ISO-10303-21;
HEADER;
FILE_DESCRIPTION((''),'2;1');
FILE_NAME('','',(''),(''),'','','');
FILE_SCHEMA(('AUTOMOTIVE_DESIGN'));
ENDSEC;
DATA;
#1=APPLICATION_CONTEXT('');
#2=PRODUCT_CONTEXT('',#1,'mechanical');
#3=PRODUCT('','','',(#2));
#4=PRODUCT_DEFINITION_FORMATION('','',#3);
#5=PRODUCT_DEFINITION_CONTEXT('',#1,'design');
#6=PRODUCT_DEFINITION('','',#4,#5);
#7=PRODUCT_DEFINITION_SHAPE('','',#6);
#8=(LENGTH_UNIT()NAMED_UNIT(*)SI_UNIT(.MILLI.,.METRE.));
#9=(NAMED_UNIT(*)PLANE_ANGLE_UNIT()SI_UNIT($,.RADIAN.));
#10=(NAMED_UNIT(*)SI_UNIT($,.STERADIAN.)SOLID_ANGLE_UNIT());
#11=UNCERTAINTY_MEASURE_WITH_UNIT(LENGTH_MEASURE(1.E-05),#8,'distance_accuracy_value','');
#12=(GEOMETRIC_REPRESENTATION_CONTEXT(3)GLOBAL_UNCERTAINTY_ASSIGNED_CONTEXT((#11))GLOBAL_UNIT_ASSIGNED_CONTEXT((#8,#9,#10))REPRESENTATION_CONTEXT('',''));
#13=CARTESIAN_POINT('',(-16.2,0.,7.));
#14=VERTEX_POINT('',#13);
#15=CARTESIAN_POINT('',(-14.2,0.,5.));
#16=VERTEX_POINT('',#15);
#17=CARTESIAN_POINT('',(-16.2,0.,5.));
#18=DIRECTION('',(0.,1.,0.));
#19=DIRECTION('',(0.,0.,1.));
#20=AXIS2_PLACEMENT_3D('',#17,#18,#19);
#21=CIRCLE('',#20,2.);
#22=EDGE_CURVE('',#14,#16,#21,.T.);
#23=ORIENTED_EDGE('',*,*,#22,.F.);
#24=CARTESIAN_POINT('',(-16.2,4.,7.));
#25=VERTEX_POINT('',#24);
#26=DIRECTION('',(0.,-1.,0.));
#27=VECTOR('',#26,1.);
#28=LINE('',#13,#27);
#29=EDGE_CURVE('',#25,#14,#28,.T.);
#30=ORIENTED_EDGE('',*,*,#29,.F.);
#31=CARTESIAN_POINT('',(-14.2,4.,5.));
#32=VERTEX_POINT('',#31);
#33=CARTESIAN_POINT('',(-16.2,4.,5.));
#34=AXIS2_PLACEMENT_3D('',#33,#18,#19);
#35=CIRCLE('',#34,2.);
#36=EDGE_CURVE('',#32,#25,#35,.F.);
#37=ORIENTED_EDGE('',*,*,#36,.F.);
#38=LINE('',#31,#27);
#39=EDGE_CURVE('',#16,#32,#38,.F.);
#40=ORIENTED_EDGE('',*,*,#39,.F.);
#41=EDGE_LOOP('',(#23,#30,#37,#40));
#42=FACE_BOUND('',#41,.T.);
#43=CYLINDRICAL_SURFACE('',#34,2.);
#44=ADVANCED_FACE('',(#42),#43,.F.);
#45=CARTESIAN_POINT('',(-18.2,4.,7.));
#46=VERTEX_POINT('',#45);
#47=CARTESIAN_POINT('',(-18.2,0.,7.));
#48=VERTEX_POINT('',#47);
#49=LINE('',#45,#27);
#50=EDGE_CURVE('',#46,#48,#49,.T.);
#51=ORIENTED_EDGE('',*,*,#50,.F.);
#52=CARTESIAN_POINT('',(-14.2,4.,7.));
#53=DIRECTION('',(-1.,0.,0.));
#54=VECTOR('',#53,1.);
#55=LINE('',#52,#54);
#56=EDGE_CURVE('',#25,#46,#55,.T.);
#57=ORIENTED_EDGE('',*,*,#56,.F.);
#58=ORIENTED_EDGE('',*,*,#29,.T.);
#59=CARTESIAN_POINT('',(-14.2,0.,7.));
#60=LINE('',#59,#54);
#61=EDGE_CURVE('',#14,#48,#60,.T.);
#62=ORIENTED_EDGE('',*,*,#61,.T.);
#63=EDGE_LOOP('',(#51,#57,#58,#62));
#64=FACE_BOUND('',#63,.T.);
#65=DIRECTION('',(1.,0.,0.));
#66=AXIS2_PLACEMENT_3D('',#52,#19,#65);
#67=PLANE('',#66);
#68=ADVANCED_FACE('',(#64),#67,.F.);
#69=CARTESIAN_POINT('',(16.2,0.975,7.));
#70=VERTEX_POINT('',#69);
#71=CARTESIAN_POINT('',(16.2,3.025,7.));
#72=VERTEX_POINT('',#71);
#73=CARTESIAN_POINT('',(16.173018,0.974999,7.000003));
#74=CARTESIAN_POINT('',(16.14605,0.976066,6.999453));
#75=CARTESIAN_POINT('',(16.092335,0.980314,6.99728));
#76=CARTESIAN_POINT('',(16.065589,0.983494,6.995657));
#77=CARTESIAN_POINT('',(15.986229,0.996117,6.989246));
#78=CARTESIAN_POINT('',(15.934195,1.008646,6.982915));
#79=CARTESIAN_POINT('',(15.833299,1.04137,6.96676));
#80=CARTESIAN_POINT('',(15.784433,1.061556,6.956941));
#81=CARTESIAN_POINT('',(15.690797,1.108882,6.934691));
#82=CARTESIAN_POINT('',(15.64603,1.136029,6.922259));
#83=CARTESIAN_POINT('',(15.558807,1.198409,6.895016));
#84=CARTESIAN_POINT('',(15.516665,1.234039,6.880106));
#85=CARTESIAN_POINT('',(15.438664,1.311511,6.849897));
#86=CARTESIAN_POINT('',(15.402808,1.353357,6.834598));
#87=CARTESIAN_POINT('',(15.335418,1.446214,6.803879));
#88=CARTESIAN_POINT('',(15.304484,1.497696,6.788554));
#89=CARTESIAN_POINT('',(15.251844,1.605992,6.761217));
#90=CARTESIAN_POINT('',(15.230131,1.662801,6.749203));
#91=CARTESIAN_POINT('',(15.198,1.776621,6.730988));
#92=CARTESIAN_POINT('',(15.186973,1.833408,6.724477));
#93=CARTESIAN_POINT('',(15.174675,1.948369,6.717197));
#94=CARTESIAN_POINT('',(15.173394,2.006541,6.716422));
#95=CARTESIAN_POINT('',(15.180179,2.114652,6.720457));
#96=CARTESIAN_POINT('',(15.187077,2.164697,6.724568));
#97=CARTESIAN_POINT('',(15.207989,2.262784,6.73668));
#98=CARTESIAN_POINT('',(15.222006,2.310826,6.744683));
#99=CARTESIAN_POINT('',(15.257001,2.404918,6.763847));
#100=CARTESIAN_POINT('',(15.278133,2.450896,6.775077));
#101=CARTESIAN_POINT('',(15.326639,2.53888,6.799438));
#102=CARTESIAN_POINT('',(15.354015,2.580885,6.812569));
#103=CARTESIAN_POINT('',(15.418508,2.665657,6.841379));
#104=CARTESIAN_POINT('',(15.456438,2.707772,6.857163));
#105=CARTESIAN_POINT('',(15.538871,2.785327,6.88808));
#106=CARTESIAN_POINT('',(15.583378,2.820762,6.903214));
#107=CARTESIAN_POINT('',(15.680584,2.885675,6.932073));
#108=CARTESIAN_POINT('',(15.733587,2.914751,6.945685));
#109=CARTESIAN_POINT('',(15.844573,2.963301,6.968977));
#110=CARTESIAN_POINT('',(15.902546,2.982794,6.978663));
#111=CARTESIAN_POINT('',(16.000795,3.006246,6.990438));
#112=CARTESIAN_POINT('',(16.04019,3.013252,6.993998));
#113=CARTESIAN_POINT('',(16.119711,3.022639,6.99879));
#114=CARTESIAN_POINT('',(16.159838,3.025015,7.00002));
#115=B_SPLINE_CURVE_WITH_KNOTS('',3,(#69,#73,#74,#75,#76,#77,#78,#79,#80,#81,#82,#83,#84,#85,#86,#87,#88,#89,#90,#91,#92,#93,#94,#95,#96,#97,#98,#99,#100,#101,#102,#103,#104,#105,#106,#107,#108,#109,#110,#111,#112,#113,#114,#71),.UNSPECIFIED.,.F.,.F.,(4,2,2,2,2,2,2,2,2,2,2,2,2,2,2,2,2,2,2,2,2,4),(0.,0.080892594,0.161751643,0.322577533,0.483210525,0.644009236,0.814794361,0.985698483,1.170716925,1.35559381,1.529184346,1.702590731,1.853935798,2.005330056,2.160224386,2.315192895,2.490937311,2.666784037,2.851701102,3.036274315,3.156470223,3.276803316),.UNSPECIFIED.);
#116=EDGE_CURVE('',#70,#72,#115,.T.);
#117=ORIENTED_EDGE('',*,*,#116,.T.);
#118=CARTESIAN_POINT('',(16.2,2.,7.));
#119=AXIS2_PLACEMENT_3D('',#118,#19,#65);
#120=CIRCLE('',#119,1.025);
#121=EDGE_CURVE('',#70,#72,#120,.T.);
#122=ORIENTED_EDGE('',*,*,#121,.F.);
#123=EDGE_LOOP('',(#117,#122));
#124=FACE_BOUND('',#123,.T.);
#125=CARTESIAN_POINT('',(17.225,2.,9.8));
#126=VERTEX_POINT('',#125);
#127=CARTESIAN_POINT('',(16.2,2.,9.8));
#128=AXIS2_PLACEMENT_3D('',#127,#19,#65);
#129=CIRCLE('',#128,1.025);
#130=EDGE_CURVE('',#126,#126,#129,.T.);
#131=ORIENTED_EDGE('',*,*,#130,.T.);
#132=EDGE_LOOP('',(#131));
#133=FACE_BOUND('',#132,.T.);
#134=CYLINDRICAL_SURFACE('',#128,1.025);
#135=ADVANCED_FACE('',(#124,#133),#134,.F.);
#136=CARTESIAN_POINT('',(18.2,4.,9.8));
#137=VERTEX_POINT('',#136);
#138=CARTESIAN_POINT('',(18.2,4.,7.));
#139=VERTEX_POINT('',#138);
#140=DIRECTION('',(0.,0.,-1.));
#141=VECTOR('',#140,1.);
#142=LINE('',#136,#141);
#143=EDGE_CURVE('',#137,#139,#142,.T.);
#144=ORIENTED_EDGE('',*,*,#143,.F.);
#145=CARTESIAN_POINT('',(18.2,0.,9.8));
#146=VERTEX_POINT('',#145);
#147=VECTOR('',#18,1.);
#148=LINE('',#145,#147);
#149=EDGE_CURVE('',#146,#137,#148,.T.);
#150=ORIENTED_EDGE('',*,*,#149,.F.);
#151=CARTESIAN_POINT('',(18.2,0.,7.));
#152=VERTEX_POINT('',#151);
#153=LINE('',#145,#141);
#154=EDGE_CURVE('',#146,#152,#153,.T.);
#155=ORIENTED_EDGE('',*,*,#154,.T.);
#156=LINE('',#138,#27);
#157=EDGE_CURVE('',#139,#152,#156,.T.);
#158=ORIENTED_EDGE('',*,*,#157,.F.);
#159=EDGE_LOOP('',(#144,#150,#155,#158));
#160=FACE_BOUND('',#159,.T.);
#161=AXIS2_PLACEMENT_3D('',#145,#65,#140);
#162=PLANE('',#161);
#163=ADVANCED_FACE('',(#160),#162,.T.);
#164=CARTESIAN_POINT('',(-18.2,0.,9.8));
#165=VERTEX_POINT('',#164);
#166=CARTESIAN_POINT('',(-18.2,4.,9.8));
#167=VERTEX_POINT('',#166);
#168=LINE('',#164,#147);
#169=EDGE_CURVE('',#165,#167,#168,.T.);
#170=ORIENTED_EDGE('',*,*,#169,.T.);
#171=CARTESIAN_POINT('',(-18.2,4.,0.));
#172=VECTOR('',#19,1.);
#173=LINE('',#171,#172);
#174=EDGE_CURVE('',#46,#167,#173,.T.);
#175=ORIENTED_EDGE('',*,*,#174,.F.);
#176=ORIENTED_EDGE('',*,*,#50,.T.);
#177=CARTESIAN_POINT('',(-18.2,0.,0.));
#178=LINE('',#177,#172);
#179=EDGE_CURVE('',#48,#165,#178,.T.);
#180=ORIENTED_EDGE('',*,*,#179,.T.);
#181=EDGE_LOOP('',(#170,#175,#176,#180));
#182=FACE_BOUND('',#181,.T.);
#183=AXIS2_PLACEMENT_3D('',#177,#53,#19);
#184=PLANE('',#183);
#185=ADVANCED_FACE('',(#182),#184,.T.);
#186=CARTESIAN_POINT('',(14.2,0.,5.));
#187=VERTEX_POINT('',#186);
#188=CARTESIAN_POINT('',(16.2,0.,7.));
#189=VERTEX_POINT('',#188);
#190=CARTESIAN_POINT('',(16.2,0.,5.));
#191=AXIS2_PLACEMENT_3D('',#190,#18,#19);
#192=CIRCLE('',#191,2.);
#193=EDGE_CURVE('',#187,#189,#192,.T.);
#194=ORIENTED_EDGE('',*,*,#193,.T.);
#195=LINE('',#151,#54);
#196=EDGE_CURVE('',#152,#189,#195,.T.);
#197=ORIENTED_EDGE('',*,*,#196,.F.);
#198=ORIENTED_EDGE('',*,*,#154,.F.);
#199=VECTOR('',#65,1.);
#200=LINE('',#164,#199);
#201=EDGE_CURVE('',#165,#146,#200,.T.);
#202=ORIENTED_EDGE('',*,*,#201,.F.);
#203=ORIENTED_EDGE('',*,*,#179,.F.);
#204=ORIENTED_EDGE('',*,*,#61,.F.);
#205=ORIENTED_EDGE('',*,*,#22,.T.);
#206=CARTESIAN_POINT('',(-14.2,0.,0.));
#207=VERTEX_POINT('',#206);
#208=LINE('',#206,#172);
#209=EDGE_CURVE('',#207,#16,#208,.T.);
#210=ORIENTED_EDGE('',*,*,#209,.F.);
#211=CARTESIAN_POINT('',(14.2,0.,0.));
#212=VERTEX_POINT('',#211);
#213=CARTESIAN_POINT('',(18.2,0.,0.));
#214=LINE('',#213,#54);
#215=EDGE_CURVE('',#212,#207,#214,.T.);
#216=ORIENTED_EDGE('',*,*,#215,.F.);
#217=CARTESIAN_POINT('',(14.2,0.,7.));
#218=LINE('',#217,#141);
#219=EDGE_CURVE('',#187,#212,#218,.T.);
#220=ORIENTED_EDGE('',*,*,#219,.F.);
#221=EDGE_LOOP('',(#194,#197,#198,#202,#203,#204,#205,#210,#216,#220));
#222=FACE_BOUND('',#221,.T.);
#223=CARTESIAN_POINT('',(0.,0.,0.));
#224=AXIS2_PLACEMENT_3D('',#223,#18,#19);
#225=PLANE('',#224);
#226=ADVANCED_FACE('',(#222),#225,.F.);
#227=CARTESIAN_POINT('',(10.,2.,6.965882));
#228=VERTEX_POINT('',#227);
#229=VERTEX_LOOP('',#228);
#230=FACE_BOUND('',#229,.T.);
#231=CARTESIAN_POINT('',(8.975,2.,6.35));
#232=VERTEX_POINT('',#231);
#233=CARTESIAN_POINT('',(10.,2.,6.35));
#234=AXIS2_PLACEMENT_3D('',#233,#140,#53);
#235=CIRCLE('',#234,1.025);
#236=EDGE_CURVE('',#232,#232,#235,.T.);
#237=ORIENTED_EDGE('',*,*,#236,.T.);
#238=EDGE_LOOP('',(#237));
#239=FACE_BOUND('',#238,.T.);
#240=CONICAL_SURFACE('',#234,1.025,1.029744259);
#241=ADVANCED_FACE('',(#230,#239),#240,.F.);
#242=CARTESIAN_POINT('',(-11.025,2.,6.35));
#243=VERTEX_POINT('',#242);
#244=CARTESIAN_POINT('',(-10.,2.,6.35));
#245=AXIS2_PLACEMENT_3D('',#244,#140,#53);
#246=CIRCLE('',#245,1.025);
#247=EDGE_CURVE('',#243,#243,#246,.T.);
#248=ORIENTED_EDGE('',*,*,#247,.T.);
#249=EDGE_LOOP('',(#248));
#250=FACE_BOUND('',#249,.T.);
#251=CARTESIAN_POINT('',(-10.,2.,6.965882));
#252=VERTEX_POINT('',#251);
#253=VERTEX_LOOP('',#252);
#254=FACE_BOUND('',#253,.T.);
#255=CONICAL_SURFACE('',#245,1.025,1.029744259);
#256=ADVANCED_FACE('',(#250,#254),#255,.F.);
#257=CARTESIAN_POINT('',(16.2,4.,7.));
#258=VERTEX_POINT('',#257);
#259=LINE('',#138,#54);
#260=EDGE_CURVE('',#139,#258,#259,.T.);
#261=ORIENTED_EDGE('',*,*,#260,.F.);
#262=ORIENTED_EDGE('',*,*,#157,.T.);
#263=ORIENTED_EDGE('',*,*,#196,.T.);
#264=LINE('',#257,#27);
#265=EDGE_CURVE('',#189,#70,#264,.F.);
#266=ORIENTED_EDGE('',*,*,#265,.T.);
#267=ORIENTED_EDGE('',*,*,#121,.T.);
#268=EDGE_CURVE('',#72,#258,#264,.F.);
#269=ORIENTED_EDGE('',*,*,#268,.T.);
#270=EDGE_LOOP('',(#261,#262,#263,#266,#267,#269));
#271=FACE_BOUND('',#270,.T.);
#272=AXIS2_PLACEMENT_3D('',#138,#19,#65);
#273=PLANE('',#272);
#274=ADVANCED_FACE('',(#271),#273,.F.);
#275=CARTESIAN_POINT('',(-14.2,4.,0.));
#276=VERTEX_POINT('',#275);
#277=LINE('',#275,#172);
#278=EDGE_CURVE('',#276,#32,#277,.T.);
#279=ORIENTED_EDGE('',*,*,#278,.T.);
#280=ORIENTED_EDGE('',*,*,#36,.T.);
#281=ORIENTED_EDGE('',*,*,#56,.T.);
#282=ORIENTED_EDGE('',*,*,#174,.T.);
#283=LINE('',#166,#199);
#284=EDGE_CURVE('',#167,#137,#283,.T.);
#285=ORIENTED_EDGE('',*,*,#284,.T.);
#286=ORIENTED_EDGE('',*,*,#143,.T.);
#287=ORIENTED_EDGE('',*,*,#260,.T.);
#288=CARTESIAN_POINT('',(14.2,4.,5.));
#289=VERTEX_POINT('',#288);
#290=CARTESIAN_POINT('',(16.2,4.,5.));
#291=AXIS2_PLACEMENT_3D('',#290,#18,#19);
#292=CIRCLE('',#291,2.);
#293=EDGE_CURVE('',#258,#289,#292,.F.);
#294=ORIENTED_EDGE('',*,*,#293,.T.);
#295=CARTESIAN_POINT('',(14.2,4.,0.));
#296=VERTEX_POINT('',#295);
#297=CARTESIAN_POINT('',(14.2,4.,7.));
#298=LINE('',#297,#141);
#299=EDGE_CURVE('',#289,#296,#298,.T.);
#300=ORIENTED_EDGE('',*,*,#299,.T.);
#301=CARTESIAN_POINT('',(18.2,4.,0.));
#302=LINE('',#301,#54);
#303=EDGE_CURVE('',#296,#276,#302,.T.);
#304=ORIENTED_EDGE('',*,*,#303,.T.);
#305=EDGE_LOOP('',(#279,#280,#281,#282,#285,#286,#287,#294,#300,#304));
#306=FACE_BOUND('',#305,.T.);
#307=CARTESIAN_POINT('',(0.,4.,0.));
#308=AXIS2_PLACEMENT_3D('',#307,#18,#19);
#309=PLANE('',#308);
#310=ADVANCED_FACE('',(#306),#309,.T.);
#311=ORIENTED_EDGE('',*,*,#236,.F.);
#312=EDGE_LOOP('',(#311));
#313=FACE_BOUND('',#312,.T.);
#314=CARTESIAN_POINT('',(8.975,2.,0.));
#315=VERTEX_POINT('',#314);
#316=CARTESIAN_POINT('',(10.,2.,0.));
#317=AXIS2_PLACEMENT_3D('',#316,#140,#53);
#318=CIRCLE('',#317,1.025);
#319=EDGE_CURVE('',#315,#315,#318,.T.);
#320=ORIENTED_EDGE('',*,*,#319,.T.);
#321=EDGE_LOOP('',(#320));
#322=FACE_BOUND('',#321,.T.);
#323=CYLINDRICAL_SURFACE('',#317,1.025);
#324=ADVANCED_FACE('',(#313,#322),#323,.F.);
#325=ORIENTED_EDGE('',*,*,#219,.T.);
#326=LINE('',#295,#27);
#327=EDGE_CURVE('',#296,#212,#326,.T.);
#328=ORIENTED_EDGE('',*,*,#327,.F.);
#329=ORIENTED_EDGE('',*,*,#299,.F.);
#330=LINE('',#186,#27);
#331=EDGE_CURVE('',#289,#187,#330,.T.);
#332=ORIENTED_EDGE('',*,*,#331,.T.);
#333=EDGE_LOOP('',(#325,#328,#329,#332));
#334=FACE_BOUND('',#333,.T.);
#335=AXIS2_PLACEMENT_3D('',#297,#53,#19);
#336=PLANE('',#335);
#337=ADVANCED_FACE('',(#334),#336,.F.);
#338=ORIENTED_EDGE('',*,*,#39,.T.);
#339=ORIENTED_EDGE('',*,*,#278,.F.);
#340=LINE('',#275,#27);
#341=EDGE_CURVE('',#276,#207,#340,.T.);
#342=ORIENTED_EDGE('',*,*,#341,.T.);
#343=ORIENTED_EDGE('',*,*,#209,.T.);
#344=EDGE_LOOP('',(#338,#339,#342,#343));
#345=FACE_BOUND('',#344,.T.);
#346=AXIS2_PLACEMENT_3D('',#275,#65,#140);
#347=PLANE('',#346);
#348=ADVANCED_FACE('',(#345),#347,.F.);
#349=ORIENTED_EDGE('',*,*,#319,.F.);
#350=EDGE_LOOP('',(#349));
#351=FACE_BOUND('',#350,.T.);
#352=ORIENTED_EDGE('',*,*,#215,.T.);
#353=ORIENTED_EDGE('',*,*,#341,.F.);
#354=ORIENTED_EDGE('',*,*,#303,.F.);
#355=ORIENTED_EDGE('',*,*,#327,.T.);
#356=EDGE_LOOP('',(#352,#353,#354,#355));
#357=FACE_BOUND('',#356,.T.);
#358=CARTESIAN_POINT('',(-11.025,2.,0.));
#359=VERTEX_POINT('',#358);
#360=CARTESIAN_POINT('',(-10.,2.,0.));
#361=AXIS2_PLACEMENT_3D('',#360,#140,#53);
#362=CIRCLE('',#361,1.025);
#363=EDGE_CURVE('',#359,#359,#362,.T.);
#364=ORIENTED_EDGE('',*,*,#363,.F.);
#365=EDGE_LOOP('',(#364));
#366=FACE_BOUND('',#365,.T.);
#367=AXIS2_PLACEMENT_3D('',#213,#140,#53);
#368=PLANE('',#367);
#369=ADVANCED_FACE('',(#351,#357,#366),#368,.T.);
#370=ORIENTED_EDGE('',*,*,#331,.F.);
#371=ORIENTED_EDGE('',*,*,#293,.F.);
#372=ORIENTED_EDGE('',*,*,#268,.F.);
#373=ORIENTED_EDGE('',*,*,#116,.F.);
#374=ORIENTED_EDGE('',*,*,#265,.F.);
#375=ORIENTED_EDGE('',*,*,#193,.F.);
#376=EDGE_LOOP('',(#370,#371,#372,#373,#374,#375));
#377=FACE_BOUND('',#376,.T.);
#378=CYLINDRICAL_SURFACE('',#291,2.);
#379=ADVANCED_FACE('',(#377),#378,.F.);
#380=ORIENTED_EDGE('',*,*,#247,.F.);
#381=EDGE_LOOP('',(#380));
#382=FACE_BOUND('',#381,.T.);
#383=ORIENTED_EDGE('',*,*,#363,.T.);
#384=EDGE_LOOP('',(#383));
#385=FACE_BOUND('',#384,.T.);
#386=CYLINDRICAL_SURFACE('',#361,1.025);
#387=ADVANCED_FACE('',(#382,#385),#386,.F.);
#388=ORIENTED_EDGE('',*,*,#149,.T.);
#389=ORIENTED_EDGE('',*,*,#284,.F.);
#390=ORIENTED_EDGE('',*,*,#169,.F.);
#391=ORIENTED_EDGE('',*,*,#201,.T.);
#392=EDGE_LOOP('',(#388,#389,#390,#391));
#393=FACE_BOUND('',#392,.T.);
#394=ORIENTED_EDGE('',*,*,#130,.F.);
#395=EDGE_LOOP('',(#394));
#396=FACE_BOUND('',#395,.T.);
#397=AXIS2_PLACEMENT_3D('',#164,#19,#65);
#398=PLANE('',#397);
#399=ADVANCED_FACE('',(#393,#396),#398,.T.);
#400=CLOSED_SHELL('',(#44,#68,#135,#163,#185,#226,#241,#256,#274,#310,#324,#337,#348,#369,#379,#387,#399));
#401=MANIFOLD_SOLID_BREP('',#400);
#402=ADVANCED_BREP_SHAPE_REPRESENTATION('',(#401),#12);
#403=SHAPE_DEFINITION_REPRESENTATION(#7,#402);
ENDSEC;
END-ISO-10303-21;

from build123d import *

# Parameters (mm, degrees)
SKETCH1_W                    = 36.4
SKETCH1_H                    = 9.8
BOSS_EXTRUDE1_DEPTH          = 4
SKETCH2_W                    = 4
SKETCH2_H                    = 6.999999999
CUT_EXTRUDE1_DEPTH           = 22.05421573
SKETCH3_W                    = 4
SKETCH3_H                    = 6.999999999
CUT_EXTRUDE2_DEPTH           = 22.05421573
M2_5X0_45_TAPPED_HOLE1_D     = 2.05
M2_5X0_45_TAPPED_HOLE1_DEPTH = 6.35
M2_5X0_45_TAPPED_HOLE1_TIP   = 0.615882135
M2_5X0_45_TAPPED_HOLE2_D     = 2.05
FILLET1_R                    = 2


with BuildPart() as part:
    # Sketch1 → Boss-Extrude1 (new body)
    with BuildSketch(Plane(origin=(0, 4, 0), x_dir=(1, 0, 0), z_dir=(0, 1, 0))):
        with Locations((0, -4.9)):
            Rectangle(SKETCH1_W, SKETCH1_H)
    extrude(amount=-BOSS_EXTRUDE1_DEPTH)

    # Sketch2 → Cut-Extrude1 (cut, through all)
    with BuildSketch(Plane.XZ):
        with Locations((-16.2, 3.5)):
            Rectangle(SKETCH2_W, SKETCH2_H)
    extrude(amount=-CUT_EXTRUDE1_DEPTH, mode=Mode.SUBTRACT)

    # Sketch3 → Cut-Extrude2 (cut, through all)
    with BuildSketch(Plane.XZ):
        with Locations((16.2, 3.5)):
            Rectangle(SKETCH3_W, SKETCH3_H)
    extrude(amount=-CUT_EXTRUDE2_DEPTH, mode=Mode.SUBTRACT)

    # M2.5x0.45 Tapped Hole1
    with Locations(Plane(origin=(0, 0, 0), x_dir=(-1, 0, 0), z_dir=(0, 0, -1))):
        with Locations((10, 2), (-10, 2)):
            Hole(M2_5X0_45_TAPPED_HOLE1_D / 2, depth=M2_5X0_45_TAPPED_HOLE1_DEPTH)
            with Locations((0, 0, -(M2_5X0_45_TAPPED_HOLE1_DEPTH + M2_5X0_45_TAPPED_HOLE1_TIP / 2))):  # 118° drill point
                Cone(0, M2_5X0_45_TAPPED_HOLE1_D / 2, M2_5X0_45_TAPPED_HOLE1_TIP, mode=Mode.SUBTRACT)

    # M2.5x0.45 Tapped Hole2 (through all)
    with Locations(Plane.XY.offset(9.8)):
        with Locations((16.2, 2)):
            Hole(M2_5X0_45_TAPPED_HOLE2_D / 2)

    # Fillet1
    # the kernel refuses this fillet: 2 mm, written as the material it adds along each edge
    with BuildSketch(Plane(origin=(-14.2, 0, 6.999999999), x_dir=(0, 0, -1), z_dir=(0, 1, 0))) as fillet1_piece_1:
        with BuildLine():
            CenterArc((FILLET1_R, FILLET1_R), FILLET1_R, 180, 90)
            Line((0, FILLET1_R), (0, 0))
            Line((0, 0), (FILLET1_R, 0))
        make_face()
    extrude(amount=4)
    with BuildSketch(Plane(origin=(14.2, 0, 6.999999999), x_dir=(0, 0, -1), z_dir=(0, 1, 0))) as fillet1_piece_2_section:
        with BuildLine():
            CenterArc((FILLET1_R, -FILLET1_R), FILLET1_R, 90, 90)
            Line((0, -FILLET1_R), (0, 0))
            Line((0, 0), (FILLET1_R, 0))
        make_face()
    fillet1_piece_2 = extrude(amount=4, mode=Mode.PRIVATE)
    fillet1_piece_2 = fillet1_piece_2 - Plane(origin=(16.2, 2, 6.528177275), x_dir=(-1, 0, 0), z_dir=(0, 0, -1)) * Cylinder(1.025, 16, mode=Mode.PRIVATE)
    add(fillet1_piece_2)


solid = part.part
